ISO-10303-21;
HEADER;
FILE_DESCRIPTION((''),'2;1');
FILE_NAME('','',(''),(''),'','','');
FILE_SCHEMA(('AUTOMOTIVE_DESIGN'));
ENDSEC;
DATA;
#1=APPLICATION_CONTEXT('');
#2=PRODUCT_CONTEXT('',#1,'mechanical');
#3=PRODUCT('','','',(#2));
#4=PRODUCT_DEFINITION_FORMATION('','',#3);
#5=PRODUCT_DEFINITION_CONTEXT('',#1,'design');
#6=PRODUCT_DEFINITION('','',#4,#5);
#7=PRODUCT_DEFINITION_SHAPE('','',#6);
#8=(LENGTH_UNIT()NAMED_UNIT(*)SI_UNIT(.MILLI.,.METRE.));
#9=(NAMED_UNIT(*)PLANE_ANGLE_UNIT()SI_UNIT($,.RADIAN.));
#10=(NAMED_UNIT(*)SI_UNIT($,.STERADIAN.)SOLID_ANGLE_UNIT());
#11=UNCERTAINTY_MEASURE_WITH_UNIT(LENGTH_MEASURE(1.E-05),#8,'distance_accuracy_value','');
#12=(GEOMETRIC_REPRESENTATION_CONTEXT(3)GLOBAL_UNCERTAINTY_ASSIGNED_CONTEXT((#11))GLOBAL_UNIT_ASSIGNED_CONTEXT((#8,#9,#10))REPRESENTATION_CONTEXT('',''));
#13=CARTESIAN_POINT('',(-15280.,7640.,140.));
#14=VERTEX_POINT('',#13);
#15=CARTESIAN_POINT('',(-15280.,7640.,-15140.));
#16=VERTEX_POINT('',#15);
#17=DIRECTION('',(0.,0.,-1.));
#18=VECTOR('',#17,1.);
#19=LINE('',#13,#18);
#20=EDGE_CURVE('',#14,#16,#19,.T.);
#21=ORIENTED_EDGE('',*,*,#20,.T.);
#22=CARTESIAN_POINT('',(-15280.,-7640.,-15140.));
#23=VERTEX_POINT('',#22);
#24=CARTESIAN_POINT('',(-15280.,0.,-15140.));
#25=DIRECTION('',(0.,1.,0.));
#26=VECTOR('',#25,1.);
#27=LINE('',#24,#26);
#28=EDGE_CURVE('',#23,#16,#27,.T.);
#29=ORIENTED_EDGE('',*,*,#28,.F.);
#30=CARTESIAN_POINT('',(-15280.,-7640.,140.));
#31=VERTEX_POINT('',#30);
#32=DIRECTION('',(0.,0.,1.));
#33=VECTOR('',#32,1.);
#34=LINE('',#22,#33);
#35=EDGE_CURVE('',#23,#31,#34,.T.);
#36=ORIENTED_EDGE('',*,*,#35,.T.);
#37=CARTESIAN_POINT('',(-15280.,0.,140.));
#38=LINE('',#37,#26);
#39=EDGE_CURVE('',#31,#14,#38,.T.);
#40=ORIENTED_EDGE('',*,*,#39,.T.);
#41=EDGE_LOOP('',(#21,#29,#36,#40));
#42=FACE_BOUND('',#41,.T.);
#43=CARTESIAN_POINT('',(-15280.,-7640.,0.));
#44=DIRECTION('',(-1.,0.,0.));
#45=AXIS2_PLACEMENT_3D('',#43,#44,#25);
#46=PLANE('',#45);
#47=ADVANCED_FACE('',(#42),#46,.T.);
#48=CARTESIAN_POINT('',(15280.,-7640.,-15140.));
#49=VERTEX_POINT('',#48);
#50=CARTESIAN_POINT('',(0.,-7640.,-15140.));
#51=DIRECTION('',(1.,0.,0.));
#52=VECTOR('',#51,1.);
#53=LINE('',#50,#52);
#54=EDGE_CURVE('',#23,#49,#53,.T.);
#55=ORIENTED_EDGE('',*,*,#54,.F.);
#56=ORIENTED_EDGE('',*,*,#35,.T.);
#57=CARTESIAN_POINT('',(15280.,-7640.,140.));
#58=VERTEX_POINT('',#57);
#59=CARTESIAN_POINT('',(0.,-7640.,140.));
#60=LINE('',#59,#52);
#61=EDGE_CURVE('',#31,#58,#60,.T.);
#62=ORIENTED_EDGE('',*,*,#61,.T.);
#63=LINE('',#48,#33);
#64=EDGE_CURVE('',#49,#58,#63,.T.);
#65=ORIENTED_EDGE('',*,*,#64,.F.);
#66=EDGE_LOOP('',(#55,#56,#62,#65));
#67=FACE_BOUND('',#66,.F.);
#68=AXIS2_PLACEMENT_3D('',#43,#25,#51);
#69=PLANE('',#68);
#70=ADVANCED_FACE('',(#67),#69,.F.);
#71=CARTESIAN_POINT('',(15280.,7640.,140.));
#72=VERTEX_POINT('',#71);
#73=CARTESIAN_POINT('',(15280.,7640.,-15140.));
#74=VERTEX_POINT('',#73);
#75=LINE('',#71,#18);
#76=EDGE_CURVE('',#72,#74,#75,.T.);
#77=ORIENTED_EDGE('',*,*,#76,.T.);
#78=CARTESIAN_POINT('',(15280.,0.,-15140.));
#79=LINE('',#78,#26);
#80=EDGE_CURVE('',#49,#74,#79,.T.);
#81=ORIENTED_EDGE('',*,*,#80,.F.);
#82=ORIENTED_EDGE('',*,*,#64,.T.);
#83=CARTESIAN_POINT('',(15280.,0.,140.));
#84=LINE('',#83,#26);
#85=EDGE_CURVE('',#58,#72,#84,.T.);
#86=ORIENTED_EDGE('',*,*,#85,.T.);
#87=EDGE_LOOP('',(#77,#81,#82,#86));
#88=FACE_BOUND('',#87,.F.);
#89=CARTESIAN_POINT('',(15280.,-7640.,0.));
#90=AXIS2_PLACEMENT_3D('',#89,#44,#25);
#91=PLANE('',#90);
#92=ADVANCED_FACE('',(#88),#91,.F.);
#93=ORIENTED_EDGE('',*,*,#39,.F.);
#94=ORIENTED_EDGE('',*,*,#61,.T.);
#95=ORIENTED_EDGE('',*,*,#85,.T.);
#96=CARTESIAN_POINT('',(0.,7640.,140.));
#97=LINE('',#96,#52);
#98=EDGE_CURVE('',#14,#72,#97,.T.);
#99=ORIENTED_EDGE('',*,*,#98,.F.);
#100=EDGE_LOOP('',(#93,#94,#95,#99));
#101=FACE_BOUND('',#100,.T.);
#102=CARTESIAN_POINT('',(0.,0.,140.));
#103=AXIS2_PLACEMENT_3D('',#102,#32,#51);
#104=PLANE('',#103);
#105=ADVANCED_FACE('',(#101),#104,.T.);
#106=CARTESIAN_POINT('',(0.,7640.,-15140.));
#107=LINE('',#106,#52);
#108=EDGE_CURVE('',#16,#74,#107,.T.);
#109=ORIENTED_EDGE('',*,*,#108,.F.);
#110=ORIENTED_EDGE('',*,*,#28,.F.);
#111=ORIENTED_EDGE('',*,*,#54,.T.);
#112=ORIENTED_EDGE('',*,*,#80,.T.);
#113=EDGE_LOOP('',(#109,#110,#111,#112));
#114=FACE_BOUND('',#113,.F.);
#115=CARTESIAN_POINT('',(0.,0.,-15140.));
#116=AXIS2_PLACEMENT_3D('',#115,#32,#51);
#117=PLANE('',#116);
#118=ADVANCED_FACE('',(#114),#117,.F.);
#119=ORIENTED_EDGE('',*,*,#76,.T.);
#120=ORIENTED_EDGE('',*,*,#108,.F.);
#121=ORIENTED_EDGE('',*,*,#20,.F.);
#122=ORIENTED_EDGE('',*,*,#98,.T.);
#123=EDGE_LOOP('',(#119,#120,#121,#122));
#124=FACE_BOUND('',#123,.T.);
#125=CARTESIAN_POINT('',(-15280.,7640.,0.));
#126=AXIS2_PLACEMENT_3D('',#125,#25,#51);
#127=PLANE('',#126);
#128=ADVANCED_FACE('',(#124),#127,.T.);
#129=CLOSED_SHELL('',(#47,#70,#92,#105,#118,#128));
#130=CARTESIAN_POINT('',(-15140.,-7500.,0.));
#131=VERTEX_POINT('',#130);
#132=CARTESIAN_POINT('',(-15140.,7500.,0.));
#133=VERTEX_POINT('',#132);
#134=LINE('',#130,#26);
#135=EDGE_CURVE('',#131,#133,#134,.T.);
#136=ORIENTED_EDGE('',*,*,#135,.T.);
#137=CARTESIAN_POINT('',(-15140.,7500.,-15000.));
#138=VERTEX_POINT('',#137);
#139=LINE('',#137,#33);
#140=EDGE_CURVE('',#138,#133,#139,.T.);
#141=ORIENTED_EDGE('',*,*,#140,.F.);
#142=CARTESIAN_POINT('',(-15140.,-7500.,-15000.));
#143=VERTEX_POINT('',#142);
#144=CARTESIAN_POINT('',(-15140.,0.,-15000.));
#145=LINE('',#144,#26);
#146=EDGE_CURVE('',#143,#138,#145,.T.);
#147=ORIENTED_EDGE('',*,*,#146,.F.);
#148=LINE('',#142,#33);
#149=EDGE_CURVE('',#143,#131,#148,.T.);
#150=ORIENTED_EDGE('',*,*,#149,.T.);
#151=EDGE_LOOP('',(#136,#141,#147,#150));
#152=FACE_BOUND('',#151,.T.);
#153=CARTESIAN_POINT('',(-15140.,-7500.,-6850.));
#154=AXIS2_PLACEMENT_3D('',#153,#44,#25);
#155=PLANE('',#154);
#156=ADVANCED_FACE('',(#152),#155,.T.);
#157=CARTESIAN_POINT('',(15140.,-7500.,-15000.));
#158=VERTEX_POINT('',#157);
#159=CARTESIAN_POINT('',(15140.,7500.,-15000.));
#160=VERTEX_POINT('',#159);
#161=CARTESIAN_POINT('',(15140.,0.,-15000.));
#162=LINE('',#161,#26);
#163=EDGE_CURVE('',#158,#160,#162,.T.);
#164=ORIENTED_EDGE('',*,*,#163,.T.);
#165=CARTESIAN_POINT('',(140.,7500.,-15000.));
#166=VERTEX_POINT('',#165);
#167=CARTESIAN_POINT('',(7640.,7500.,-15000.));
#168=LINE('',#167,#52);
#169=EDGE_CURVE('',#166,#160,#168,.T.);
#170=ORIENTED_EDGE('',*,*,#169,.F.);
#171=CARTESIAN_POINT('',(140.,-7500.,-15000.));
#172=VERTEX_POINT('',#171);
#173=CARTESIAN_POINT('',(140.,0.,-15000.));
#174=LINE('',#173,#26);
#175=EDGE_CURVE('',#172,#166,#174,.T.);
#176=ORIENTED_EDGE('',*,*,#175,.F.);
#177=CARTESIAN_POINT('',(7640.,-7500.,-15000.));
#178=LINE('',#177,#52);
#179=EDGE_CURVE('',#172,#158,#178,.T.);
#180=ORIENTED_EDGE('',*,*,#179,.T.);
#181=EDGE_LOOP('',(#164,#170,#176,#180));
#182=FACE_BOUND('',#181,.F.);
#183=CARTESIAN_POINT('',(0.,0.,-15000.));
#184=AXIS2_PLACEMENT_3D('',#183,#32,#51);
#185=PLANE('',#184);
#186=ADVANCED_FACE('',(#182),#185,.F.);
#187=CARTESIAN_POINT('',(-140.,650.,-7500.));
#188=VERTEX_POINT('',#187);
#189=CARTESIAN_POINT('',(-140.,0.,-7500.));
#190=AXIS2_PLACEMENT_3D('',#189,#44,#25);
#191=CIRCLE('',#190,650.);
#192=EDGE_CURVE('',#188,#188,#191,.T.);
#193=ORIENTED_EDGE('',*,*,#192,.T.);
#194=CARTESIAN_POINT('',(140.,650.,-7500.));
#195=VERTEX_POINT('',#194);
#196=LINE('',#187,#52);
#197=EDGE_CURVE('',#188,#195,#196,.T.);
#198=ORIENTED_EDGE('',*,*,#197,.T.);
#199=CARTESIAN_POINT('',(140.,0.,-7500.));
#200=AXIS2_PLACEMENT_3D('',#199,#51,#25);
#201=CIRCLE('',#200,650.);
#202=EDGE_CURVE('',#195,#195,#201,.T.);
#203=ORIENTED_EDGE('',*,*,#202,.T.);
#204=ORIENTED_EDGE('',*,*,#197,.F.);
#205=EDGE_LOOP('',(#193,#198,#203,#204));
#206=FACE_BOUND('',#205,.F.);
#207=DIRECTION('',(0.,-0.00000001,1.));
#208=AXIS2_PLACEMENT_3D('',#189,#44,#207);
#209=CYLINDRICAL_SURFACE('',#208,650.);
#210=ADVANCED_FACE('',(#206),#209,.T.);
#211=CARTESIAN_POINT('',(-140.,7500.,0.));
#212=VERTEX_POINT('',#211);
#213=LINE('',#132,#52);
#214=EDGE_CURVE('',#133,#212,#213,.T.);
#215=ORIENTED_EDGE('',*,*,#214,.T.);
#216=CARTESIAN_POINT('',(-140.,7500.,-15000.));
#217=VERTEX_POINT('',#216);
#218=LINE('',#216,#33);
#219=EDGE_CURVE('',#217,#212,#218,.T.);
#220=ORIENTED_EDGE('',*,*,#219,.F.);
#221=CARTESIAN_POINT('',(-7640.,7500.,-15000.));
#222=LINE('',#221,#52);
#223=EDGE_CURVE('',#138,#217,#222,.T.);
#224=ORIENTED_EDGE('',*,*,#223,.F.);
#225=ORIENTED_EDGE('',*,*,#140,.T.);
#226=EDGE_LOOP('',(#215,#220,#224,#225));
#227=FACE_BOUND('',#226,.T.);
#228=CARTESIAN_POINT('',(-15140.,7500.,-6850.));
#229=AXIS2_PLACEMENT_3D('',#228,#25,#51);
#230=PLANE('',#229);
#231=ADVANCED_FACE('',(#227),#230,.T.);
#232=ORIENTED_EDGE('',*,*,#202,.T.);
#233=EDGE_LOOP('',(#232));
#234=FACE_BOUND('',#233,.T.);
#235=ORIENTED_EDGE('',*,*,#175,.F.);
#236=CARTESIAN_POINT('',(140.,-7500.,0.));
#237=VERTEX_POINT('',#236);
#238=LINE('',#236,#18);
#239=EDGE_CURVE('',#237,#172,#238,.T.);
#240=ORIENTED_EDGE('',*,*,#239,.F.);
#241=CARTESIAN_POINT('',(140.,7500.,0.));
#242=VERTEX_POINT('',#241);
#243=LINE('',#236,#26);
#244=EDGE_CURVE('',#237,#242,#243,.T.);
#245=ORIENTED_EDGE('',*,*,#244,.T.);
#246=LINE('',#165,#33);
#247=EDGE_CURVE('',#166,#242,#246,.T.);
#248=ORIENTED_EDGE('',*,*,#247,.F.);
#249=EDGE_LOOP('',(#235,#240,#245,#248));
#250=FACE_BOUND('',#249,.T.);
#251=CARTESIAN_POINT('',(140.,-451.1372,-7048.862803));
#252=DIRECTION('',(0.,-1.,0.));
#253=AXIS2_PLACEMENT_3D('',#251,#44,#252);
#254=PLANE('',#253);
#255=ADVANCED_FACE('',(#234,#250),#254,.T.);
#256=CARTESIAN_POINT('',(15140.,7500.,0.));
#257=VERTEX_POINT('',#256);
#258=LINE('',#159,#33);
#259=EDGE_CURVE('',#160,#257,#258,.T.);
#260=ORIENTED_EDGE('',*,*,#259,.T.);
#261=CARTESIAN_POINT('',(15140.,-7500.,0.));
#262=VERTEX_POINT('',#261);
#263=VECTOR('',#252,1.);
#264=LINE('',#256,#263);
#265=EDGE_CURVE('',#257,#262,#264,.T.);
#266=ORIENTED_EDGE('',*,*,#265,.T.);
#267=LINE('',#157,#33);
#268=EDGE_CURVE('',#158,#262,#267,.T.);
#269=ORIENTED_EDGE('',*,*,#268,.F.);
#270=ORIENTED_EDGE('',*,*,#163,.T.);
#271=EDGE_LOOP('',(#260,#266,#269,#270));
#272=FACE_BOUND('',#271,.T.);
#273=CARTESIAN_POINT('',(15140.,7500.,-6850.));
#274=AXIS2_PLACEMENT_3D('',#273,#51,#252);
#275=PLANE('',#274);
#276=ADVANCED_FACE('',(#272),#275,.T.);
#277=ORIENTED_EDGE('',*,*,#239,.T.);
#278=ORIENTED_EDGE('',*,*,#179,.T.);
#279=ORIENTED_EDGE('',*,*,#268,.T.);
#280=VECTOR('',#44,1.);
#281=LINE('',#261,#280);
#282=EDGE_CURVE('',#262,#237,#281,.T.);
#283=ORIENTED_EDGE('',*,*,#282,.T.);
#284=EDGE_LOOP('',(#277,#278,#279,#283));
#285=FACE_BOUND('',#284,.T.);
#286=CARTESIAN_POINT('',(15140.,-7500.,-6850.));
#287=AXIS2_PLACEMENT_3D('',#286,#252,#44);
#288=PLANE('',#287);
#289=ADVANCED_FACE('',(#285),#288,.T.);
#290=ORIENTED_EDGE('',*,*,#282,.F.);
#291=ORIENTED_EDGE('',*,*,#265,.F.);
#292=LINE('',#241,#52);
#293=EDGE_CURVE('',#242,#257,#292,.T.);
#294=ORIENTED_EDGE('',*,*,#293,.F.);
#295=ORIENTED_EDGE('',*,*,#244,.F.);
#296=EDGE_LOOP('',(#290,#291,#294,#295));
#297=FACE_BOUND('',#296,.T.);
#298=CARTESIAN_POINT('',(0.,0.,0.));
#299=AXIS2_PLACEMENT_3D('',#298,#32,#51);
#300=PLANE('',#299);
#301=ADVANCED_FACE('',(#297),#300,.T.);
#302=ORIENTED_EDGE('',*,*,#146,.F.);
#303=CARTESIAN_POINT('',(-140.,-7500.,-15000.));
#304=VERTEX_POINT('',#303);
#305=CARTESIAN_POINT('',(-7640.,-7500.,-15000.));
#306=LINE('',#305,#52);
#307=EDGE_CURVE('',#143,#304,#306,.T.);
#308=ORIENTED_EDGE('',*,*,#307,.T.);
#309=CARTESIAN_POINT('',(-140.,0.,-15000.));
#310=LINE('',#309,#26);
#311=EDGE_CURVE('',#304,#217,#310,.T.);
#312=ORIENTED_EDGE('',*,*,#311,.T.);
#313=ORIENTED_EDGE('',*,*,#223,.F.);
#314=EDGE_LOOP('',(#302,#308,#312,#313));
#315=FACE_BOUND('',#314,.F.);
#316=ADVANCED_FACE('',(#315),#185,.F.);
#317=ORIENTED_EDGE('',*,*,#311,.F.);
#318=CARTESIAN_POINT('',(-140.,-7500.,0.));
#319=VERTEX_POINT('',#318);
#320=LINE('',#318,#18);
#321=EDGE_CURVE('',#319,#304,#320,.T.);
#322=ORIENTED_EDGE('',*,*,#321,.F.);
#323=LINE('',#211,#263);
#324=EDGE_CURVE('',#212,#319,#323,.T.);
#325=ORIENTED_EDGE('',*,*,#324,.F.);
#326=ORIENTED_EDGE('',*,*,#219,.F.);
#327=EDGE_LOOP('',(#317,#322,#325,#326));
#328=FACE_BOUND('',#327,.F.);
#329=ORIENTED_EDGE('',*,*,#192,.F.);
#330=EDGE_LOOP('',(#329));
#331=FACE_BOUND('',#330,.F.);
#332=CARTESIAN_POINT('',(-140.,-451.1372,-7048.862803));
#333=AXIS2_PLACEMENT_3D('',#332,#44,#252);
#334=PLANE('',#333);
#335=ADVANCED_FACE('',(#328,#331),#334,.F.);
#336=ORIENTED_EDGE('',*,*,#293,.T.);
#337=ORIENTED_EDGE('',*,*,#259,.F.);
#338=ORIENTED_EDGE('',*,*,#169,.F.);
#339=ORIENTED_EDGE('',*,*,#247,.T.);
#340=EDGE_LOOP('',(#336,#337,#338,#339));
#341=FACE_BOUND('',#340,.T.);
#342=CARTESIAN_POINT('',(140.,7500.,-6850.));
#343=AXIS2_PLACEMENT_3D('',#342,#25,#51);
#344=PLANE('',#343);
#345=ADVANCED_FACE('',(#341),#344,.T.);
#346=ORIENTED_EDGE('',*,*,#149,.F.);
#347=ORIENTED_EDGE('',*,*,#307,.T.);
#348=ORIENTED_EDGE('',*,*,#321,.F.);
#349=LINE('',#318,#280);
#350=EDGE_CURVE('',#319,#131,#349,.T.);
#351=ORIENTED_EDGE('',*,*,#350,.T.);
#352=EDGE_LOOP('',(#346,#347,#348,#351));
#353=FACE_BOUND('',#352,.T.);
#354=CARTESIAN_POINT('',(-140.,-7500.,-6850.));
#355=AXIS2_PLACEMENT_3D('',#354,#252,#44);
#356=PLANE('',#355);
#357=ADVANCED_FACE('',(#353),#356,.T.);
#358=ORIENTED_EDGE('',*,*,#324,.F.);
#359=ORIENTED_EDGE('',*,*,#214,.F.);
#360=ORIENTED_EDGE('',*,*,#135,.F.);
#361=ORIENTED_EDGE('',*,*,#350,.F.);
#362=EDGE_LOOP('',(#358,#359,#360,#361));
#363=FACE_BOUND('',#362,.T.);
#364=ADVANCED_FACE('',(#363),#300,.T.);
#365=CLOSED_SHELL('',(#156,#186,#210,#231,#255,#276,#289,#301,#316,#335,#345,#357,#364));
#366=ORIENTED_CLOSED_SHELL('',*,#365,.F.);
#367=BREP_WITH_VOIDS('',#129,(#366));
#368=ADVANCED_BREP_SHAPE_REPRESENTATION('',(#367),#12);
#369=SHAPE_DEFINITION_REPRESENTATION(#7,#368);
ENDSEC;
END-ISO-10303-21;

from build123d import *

# Parameters (mm, degrees)
F1_W      = 30560
F1_H      = 15280
F2_DEPTH  = 140
F3_W      = 30560
F3_H      = 15280
F3_W_2    = 15000
F3_H_2    = 15000
F4_DEPTH  = 6850
F5_W      = 30560
F5_H      = 15280
F6_DEPTH  = 1300
F10_W     = 30560
F10_H     = 15280
F10_W_2   = 280
F10_H_2   = 1300
F11_DEPTH = 6850
F12_DEPTH = 280
F13_W     = 30560
F13_H     = 15280
F13_W_2   = 15000
F13_H_2   = 15000
F14_DEPTH = 140


with BuildPart() as f2:
    # F1 (on offset) → F2 (new body)
    with BuildSketch(Plane.XY.offset(-15140)):
        Rectangle(F1_W, F1_H)
    extrude(amount=F2_DEPTH)

    # F3 (on face) → F4 (join)
    with BuildSketch(Plane.XY.offset(-15000)):
        Rectangle(F3_W, F3_H)
        with Locations((-7640, 0)):
            Rectangle(F3_W_2, F3_H_2, mode=Mode.SUBTRACT)
        with Locations((7640, 0)):
            Rectangle(F3_W_2, F3_H_2, mode=Mode.SUBTRACT)
    extrude(amount=F4_DEPTH)

    # F5 (on face) → F6 (join)
    with BuildSketch(Plane.XY.offset(-8150)):
        Rectangle(F5_W, F5_H)
        Polygon((-15140, -7500), (-15140, 7500), (-140, 7500), (-140, 650), (140, 650), (140, 7500), (15140, 7500), (15140, -7500), (140, -7500), (140, -650), (-140, -650), (-140, -7500), align=None, mode=Mode.SUBTRACT)
    extrude(amount=F6_DEPTH)

    # F10 (on face) → F11 (join)
    with BuildSketch(Plane.XY.offset(-6850)):
        Rectangle(F10_W, F10_H)
        Polygon((-15140, -7500), (-15140, 7500), (-140, 7500), (-140, 650), (140, 650), (140, 7500), (15140, 7500), (15140, -7500), (140, -7500), (140, -650), (-140, -650), (-140, -7500), align=None, mode=Mode.SUBTRACT)
        Rectangle(F10_W_2, F10_H_2)
    extrude(amount=F11_DEPTH)

    # F9 (on face) → F12 (join)
    with BuildSketch(Plane(origin=(-140, 0, 0), x_dir=(0, -1, 0), z_dir=(-1, 0, 0))):
        with BuildLine():
            Line((650, -7500), (650, -6850))
            Line((650, -6850), (6.2463e-06, -6850))
            ThreePointArc((6.2463e-06, -6850), (459.6194099796, -7040.3805944371), (650, -7500))
        make_face()
        with BuildLine():
            ThreePointArc((-650, -7500), (-459.6194055629, -7040.3805900204), (6.2463e-06, -6850))
            Line((6.2463e-06, -6850), (-650, -6850))
            Line((-650, -6850), (-650, -7500))
        make_face()
        with BuildLine():
            Line((650, -8150), (650, -7500))
            ThreePointArc((650, -7500), (459.6194077131, -7959.6194078294), (-1.644e-07, -8150))
            Line((-1.644e-07, -8150), (650, -8150))
        make_face()
        with BuildLine():
            ThreePointArc((-1.644e-07, -8150), (-459.6194078294, -7959.6194077131), (-650, -7500))
            Line((-650, -7500), (-650, -8150))
            Line((-650, -8150), (-1.644e-07, -8150))
        make_face()
    extrude(amount=-F12_DEPTH)

    # F13 (on face) → F14 (join)
    with BuildSketch(Plane.XY):
        Rectangle(F13_W, F13_H)
        with Locations((-7640, 0)):
            Rectangle(F13_W_2, F13_H_2, mode=Mode.SUBTRACT)
        with Locations((7640, 0)):
            Rectangle(F13_W_2, F13_H_2, mode=Mode.SUBTRACT)
        with Locations((-7640, 0)):
            Rectangle(F13_W_2, F13_H_2)
        with Locations((7640, 0)):
            Rectangle(F13_W_2, F13_H_2)
    extrude(amount=F14_DEPTH)


solid = f2.part
